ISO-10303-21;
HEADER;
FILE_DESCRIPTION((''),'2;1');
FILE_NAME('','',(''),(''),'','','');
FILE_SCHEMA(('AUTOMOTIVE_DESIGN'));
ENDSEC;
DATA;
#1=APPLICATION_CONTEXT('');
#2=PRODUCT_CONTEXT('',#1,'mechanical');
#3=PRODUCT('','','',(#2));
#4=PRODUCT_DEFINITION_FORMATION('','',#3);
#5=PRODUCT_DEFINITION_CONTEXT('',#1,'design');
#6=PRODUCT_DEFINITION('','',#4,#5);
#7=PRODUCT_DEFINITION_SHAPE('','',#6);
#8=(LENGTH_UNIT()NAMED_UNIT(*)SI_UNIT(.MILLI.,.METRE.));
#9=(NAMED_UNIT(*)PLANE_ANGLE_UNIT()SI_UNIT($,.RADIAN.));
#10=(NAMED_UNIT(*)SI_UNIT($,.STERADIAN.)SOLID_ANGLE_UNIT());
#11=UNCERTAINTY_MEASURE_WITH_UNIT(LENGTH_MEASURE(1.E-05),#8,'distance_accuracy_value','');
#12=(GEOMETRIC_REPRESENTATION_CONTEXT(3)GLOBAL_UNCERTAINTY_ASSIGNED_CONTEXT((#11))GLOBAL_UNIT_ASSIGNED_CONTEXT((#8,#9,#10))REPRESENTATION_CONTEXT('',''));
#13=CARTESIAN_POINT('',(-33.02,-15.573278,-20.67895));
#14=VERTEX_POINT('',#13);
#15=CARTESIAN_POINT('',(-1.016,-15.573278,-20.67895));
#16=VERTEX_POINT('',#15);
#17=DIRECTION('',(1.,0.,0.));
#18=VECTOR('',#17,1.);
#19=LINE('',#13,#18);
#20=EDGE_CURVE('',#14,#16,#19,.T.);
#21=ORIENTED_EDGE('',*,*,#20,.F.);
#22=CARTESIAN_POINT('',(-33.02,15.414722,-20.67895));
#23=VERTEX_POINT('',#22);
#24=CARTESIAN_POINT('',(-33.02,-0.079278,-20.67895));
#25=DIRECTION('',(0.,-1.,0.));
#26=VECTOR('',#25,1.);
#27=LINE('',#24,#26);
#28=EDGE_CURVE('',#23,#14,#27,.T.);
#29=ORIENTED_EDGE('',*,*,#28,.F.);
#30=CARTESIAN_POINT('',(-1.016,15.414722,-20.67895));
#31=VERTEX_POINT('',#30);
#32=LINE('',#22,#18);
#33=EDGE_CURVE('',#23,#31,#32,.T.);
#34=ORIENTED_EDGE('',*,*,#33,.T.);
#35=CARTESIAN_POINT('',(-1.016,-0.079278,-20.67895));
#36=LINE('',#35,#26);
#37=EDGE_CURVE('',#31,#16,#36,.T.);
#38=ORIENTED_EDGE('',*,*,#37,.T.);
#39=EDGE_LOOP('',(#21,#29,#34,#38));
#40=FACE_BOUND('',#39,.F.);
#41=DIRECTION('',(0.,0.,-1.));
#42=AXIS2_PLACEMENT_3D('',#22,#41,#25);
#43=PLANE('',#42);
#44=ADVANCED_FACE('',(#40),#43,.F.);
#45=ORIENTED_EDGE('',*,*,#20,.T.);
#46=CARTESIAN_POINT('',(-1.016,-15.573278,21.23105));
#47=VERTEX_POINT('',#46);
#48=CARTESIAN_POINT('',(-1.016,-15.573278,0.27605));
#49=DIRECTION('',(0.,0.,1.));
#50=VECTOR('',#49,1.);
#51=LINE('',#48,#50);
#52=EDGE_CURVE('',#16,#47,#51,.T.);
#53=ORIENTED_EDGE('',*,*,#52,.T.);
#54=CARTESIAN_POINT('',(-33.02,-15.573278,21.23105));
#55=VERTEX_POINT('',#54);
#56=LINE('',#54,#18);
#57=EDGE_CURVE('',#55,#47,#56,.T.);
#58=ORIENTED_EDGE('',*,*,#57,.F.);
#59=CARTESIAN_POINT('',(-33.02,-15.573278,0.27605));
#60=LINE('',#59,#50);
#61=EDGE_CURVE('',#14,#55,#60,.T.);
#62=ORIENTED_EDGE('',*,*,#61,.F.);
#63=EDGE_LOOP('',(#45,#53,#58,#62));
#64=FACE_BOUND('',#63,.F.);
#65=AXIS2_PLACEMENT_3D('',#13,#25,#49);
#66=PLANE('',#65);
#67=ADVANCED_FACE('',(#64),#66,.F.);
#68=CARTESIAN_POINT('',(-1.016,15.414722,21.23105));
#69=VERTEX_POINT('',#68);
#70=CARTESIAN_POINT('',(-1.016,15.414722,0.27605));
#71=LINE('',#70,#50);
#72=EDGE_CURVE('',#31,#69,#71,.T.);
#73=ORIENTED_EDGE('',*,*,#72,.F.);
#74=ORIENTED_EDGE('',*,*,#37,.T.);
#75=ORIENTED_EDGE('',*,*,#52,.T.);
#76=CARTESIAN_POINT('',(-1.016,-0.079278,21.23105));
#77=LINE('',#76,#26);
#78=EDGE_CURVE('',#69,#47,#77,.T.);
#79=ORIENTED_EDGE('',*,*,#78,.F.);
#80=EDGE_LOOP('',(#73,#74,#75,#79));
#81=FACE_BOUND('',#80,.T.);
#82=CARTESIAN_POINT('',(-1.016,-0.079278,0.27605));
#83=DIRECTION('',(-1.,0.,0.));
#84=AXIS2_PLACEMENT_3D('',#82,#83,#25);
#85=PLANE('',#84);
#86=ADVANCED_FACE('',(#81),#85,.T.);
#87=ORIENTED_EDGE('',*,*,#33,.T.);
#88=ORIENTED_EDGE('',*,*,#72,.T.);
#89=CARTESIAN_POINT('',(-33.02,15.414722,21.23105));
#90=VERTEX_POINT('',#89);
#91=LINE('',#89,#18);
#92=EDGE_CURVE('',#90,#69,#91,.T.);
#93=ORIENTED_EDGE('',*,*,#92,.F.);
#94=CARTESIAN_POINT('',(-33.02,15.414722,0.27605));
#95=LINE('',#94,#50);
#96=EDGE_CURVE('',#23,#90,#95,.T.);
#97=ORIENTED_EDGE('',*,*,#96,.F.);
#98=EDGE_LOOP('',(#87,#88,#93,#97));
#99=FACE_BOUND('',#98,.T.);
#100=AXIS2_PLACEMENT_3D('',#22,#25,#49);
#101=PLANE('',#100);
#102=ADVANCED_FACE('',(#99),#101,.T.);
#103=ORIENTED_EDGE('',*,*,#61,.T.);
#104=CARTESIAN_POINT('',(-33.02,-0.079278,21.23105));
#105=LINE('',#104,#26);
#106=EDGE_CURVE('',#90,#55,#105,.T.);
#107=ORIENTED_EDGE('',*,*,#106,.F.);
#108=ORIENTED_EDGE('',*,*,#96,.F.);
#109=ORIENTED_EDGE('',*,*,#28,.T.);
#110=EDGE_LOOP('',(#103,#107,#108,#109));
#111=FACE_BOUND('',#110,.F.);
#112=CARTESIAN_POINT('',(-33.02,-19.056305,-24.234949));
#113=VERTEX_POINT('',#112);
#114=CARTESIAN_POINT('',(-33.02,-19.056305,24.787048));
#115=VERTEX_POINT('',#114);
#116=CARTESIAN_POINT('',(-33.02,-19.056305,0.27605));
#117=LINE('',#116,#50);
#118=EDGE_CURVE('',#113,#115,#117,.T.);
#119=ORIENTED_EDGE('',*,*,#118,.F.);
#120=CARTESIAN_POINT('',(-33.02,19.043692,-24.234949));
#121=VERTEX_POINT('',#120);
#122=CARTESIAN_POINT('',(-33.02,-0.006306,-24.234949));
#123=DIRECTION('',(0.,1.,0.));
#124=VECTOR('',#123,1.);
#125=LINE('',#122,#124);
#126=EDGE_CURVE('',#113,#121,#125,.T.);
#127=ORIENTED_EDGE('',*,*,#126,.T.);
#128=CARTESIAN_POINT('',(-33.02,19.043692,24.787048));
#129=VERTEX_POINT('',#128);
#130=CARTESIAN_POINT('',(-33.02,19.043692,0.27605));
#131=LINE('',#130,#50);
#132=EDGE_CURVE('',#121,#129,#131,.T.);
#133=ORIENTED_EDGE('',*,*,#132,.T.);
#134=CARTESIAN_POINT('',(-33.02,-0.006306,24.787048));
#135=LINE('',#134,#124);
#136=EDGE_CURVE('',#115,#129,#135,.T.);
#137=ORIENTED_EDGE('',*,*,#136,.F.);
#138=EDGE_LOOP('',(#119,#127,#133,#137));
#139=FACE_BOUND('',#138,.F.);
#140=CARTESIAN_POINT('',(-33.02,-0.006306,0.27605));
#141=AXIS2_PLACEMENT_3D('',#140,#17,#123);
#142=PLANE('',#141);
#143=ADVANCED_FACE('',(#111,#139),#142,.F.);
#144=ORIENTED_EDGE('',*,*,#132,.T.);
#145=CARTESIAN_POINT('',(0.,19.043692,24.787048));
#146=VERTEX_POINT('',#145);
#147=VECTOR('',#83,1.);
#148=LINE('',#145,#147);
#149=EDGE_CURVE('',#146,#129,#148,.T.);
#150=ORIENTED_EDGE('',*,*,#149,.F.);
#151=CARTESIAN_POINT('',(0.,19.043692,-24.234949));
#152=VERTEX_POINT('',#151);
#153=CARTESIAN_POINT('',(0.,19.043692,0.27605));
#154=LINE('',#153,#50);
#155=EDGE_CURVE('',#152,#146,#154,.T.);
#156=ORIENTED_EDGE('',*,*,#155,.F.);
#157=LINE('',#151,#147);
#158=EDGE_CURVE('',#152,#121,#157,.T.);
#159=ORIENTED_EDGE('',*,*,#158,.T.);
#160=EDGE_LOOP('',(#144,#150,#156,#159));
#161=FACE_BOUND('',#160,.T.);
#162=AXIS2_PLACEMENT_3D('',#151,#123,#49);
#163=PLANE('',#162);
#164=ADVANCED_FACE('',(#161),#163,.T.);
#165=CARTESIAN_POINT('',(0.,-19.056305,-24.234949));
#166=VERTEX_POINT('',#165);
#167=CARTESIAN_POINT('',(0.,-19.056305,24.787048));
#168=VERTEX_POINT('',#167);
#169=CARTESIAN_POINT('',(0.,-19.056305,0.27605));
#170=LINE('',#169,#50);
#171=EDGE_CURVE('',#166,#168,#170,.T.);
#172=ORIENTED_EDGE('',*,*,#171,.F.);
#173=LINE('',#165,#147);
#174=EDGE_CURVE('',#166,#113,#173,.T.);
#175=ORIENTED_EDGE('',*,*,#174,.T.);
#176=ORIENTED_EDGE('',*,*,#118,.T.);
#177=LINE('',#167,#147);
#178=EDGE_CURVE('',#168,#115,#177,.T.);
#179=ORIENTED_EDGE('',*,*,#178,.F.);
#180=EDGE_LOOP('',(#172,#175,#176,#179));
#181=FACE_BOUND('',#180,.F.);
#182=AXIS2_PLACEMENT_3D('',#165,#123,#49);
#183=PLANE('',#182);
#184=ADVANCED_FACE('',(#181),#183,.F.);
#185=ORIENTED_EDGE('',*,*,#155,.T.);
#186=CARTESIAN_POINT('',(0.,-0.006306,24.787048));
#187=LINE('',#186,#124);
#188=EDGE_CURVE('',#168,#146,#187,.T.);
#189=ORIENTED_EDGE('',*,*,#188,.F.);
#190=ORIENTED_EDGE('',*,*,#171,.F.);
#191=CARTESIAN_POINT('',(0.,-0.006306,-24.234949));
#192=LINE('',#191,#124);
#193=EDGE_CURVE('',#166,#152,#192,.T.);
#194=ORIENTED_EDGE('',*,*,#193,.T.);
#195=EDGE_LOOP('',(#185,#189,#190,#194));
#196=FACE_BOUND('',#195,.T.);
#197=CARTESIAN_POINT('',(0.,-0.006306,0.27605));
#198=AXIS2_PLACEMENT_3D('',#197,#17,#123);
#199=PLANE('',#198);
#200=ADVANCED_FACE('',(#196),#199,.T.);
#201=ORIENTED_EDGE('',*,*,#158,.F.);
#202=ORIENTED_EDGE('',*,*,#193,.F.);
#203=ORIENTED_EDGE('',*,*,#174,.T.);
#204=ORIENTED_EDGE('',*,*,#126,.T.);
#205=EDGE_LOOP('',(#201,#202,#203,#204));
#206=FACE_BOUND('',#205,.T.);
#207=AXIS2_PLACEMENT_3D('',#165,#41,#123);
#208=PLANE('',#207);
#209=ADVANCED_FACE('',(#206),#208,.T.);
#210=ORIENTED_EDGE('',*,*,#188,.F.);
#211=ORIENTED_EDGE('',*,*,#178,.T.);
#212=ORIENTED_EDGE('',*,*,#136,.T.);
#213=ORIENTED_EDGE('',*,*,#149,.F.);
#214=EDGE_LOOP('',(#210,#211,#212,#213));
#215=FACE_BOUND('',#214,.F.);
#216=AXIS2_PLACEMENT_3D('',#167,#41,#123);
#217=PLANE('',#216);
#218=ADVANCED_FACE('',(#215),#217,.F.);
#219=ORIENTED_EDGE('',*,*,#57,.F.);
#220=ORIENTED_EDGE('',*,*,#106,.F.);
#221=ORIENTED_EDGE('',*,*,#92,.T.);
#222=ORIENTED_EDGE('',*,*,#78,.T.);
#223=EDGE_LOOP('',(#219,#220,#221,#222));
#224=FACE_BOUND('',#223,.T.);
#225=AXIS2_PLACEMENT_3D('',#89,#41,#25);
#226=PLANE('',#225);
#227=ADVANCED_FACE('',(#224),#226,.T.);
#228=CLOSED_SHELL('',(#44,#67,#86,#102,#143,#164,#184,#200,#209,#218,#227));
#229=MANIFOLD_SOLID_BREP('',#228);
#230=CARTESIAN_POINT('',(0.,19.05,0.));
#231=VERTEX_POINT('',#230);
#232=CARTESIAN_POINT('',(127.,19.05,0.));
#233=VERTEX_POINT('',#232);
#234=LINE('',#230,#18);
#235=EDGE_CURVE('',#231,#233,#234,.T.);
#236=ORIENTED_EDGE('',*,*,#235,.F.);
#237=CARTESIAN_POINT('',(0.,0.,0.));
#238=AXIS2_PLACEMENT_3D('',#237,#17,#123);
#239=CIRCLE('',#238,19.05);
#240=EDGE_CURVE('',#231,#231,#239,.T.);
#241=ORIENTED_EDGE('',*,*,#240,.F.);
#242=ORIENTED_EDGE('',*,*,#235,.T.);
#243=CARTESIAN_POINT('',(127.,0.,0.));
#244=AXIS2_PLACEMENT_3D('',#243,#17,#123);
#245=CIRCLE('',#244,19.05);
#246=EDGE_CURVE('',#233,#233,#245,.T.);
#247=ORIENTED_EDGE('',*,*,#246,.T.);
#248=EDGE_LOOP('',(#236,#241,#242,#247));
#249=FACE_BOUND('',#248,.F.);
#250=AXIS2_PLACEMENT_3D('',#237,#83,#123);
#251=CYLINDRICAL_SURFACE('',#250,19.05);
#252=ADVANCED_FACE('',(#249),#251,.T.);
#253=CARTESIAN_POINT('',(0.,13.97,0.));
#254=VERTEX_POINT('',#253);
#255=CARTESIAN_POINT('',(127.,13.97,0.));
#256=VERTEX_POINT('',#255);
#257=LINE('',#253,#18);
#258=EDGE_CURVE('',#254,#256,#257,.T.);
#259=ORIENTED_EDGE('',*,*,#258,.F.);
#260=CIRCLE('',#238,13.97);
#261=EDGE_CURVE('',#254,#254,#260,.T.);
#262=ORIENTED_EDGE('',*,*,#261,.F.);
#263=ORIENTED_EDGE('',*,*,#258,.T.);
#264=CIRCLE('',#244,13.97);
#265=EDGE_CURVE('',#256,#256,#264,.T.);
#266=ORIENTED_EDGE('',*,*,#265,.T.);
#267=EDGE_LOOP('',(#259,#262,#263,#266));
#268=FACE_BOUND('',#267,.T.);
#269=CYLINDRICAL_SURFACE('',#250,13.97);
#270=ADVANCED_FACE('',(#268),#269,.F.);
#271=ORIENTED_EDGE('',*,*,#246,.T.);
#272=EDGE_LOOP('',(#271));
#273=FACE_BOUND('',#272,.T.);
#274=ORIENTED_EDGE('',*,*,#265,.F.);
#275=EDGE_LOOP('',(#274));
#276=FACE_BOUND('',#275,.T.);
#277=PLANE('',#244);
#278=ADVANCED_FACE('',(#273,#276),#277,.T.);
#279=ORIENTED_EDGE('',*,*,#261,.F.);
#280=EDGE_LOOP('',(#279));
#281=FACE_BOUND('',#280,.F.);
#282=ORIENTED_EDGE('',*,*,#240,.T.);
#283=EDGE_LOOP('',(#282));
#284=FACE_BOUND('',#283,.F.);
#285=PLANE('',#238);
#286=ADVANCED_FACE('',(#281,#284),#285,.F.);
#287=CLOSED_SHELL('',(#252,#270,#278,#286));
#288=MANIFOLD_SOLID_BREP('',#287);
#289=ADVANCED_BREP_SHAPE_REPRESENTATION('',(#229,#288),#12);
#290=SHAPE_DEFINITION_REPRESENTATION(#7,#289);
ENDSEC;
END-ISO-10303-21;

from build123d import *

# Parameters (mm, degrees)
F0_R     = 19.05
F0_R_2   = 13.97
F1_DEPTH = 127
F2_W     = 38.0999972801
F2_H     = 49.0219972801
F2_W_2   = 30.988
F2_H_2   = 41.91
F3_DEPTH = 33.02
F8_W     = 30.988
F8_H     = 41.91
F9_DEPTH = 32.004


# Not quite as in the source:
# - the program builds the solid bodies; features that only make, move or delete a surface that nothing else refers to are left out


with BuildPart() as f1:
    # F0 (on Right) → F1 (new body)
    with BuildSketch(Plane.YZ):
        Circle(F0_R)
        Circle(F0_R_2, mode=Mode.SUBTRACT)
    extrude(amount=F1_DEPTH)


with BuildPart() as f3:
    # F2 (on Right) → F3 (new body)
    with BuildSketch(Plane.YZ):
        with Locations((-0.0063063291, 0.2760496718)):
            Rectangle(F2_W, F2_H)
        with Locations((-0.0063063291, 0.2760496718)):
            Rectangle(F2_W_2, F2_H_2, mode=Mode.SUBTRACT)
        with Locations((-0.0063063291, 0.2760496718)):
            Rectangle(F2_W_2, F2_H_2)
    extrude(amount=-F3_DEPTH)

    # F8 (on face) → F9 (cut)
    with BuildSketch(Plane(origin=(-33.02, 0, 0), x_dir=(0, -1, 0), z_dir=(-1, 0, 0))):
        with Locations((0.0792781701, 0.2760499603)):
            Rectangle(F8_W, F8_H)
    extrude(amount=-F9_DEPTH, mode=Mode.SUBTRACT)


solid = Compound([f1.part, f3.part])
